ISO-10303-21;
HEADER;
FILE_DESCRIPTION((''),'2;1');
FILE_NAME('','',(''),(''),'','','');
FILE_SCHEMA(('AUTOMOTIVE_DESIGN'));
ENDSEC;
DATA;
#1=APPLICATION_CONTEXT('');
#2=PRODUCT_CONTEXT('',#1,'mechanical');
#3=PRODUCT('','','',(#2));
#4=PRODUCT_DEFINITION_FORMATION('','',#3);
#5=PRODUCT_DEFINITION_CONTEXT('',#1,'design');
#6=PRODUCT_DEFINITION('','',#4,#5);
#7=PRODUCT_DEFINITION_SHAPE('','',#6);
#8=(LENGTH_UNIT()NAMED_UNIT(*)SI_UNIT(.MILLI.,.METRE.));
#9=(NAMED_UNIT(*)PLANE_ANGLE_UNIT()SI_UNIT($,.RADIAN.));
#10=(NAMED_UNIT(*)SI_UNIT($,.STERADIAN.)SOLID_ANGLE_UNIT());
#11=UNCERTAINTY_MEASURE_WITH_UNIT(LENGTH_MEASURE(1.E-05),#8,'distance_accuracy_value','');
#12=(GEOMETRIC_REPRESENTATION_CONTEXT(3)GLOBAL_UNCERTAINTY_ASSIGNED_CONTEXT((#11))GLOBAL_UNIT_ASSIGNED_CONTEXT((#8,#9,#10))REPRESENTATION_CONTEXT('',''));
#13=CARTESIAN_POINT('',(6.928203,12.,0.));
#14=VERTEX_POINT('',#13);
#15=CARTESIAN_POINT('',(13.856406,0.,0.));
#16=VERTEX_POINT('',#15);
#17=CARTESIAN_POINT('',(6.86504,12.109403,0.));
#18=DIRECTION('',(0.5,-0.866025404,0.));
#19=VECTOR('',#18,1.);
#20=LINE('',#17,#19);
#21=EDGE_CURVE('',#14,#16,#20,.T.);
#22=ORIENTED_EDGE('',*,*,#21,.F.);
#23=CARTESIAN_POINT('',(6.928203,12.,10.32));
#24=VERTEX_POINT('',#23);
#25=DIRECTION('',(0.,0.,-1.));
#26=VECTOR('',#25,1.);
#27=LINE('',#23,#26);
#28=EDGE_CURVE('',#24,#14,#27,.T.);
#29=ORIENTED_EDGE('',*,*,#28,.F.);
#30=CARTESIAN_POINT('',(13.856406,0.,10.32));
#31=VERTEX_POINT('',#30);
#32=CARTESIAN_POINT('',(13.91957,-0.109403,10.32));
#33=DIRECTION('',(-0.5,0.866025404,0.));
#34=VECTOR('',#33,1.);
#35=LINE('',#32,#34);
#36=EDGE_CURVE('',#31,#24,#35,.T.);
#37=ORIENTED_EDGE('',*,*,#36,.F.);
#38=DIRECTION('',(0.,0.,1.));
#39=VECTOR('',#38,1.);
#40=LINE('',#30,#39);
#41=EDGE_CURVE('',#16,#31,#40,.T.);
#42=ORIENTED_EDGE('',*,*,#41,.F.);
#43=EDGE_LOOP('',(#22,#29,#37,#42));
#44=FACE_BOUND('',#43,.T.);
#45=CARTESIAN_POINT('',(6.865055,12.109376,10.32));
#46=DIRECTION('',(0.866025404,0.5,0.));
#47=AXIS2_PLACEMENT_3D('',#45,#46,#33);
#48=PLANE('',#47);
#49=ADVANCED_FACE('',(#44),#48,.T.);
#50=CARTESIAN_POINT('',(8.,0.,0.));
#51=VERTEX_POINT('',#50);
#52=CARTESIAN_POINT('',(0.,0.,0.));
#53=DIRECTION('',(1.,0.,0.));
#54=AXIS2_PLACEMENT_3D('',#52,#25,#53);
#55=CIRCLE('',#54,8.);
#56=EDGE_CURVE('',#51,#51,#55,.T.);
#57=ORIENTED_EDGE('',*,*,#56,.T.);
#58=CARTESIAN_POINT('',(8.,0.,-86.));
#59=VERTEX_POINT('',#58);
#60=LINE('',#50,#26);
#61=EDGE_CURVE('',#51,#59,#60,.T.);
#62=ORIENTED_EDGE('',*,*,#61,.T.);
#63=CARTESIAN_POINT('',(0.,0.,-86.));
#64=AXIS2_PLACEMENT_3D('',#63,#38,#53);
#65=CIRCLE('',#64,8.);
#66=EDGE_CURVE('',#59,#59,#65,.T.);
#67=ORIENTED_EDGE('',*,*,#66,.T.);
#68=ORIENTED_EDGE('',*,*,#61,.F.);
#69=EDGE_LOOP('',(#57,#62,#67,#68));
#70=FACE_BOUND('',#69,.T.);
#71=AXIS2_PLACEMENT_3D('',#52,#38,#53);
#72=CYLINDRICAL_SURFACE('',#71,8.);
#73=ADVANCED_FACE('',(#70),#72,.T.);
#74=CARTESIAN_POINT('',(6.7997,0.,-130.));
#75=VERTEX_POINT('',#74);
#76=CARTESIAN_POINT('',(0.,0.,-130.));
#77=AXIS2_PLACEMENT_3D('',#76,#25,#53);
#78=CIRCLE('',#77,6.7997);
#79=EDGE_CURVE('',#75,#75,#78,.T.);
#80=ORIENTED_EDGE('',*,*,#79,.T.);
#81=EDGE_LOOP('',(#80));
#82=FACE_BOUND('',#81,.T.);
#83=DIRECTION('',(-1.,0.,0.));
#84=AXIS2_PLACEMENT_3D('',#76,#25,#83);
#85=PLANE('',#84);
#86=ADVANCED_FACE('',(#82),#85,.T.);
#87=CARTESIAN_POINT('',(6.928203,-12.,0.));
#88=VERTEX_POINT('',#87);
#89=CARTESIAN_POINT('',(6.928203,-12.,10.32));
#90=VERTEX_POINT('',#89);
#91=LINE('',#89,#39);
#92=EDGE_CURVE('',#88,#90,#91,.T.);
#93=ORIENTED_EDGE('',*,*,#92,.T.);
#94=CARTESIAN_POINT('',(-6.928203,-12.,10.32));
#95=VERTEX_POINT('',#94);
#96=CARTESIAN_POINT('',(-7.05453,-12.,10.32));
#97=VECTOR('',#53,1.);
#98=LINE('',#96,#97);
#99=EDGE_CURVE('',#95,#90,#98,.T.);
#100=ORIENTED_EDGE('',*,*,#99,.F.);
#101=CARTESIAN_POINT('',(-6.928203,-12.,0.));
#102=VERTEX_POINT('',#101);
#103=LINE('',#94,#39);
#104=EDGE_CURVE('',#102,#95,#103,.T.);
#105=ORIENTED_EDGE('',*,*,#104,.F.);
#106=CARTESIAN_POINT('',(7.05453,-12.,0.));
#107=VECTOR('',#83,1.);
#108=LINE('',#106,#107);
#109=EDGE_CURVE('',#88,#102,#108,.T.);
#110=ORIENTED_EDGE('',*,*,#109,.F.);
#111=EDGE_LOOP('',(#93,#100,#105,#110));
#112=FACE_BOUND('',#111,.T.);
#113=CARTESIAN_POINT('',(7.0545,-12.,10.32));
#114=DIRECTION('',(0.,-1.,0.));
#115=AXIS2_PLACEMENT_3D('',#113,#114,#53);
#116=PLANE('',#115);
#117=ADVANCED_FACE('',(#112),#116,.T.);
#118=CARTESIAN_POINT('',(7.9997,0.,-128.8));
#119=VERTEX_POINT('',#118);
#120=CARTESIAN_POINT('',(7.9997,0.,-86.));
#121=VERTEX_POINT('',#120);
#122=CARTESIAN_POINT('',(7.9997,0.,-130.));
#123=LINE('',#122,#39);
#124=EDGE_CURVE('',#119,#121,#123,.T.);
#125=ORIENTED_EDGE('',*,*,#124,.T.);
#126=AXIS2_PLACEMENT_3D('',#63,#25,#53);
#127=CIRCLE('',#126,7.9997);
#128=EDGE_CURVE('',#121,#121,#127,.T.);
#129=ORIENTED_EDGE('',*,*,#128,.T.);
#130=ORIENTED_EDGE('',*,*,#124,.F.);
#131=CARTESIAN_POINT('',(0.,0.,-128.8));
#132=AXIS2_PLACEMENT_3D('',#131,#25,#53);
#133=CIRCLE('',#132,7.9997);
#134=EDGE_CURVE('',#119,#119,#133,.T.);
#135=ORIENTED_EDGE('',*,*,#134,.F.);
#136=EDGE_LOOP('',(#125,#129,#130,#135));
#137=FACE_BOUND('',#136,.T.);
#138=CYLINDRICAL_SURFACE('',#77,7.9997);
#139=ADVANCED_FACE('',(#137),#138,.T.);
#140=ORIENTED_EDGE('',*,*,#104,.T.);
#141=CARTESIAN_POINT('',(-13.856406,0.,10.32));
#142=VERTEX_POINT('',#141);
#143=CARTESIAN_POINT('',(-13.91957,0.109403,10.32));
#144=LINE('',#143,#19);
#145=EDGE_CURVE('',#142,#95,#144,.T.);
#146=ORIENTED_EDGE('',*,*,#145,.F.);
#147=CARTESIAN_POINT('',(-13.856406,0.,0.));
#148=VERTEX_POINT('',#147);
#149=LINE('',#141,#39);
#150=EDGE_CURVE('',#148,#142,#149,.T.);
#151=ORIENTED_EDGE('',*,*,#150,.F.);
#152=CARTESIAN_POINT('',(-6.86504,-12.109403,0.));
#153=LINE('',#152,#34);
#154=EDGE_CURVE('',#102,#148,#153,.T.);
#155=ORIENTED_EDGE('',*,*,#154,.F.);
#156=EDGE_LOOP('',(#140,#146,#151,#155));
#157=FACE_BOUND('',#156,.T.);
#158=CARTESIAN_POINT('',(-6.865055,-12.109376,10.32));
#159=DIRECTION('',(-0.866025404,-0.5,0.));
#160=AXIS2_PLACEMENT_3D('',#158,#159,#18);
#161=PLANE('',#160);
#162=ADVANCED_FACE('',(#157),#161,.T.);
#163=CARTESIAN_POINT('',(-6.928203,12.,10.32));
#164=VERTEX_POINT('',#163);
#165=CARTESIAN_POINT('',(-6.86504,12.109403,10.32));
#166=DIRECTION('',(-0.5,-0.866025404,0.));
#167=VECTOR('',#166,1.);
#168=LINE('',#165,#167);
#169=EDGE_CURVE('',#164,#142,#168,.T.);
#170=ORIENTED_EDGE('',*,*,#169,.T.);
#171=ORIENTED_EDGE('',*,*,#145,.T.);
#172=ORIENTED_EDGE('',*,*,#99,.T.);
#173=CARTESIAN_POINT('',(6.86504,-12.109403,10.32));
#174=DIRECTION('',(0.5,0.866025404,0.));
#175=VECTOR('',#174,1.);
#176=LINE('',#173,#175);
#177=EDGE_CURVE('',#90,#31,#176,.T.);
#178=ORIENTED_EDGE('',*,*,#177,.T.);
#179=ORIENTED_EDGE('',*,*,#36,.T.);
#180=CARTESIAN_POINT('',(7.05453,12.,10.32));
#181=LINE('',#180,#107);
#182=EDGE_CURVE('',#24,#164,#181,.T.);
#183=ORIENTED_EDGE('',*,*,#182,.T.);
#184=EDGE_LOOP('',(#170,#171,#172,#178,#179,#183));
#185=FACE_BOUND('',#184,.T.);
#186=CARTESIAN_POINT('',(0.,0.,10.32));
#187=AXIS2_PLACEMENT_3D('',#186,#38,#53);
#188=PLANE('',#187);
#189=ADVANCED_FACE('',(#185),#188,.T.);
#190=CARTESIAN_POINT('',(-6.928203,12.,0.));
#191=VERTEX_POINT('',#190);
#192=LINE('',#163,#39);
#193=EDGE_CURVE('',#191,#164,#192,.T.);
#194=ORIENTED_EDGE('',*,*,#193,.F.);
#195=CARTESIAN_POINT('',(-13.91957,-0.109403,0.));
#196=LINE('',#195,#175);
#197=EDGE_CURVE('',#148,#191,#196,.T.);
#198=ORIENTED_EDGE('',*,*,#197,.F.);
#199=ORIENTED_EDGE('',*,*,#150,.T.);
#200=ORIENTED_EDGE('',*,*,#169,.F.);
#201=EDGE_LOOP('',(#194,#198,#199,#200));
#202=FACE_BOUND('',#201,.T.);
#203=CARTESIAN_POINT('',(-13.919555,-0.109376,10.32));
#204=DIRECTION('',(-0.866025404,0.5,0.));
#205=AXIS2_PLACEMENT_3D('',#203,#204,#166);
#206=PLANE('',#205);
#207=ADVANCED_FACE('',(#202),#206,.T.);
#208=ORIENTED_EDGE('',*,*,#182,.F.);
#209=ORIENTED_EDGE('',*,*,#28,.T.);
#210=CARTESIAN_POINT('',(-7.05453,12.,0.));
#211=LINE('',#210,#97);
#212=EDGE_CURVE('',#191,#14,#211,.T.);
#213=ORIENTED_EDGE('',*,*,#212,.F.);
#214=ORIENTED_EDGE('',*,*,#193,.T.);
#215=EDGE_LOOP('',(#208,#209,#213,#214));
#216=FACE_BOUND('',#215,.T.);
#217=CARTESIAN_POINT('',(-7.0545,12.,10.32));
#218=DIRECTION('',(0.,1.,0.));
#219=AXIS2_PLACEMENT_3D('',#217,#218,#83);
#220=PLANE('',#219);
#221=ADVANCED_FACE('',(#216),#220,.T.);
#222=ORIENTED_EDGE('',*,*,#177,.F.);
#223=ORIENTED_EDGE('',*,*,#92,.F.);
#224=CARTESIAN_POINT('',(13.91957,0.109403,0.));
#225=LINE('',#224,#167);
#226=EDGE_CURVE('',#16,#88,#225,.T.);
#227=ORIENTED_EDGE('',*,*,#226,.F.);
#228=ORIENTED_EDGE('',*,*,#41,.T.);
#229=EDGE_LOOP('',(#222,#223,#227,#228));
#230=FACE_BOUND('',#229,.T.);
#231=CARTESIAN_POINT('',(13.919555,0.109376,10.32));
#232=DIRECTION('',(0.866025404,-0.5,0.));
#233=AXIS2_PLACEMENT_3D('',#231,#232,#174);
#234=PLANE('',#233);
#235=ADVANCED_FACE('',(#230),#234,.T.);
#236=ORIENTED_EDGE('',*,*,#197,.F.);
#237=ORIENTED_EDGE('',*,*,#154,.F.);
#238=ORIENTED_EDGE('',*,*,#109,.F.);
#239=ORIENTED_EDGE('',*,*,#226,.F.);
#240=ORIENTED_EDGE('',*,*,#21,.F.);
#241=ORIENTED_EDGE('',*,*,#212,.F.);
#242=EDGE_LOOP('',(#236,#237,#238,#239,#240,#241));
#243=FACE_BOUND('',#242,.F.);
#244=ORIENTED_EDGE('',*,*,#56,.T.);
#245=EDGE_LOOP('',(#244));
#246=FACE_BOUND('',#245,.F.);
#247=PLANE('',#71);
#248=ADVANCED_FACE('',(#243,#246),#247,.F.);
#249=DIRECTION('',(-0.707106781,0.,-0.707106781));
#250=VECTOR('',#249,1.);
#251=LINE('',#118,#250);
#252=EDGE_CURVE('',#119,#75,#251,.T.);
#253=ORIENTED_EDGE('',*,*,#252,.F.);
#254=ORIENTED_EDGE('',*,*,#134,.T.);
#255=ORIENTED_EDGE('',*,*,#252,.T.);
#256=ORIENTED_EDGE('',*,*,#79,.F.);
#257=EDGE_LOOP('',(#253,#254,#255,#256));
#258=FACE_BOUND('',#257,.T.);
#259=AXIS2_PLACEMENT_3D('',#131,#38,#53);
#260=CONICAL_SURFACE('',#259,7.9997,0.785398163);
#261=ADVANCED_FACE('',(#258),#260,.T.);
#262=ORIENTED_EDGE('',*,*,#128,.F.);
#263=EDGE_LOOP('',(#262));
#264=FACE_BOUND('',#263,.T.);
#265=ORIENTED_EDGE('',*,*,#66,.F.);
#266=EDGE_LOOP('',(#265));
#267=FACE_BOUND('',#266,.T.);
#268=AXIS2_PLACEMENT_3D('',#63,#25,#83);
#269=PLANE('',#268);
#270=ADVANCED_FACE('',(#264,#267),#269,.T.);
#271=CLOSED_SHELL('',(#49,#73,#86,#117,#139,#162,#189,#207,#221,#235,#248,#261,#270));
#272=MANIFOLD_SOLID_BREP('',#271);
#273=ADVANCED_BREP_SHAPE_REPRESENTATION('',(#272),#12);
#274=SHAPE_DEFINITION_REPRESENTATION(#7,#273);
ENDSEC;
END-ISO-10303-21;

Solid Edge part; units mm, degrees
sketch "Sketch1" plane through (0, 0, 0) normal (0, 0, 1) x (1, 0, 0)
  circle A0 centre (0, 0) radius 13.92
  dimension "D1" = 27.84
extrude "Protrusion1" add sketch "Sketch1" along normal blind 10.32
sketch "Sketch2" plane through (0, 0, 0) normal (0, 0, -1) x (1, 0, 0)
  circle A0 centre (0, 0) radius 8
extrude "Protrusion2" add sketch "Sketch2" along normal blind 130
sketch "Sketch3" plane through (0, 0, -130) normal (0, 0, -1) x (1, 0, 0)
  circle A0 centre (0, 0) radius 7.9997
extrude "Cutout1" cut sketch "Sketch3" against normal blind 44 flip side to cut
chamfer "Chamfer_1" distance 1.2 angle 45 1 edges at (-7.9997, 0, -130)
sketch "Sketch4" plane through (0, 0, 10.32) normal (0, 0, 1) x (1, 0, 0)
  line L0 (-7.0545, 12) -> (7.0545, 12)
  dimension "D1" = 24
extrude "Cutout2" cut sketch "Sketch4" against normal up to next material side at (0, 12.05, 10.32)
pattern_circular "Pattern1" count 6 over 360 about axis through (0, 0, 10.32) along (0, 0, 1) of "Cutout2"
properties part number "119585"
